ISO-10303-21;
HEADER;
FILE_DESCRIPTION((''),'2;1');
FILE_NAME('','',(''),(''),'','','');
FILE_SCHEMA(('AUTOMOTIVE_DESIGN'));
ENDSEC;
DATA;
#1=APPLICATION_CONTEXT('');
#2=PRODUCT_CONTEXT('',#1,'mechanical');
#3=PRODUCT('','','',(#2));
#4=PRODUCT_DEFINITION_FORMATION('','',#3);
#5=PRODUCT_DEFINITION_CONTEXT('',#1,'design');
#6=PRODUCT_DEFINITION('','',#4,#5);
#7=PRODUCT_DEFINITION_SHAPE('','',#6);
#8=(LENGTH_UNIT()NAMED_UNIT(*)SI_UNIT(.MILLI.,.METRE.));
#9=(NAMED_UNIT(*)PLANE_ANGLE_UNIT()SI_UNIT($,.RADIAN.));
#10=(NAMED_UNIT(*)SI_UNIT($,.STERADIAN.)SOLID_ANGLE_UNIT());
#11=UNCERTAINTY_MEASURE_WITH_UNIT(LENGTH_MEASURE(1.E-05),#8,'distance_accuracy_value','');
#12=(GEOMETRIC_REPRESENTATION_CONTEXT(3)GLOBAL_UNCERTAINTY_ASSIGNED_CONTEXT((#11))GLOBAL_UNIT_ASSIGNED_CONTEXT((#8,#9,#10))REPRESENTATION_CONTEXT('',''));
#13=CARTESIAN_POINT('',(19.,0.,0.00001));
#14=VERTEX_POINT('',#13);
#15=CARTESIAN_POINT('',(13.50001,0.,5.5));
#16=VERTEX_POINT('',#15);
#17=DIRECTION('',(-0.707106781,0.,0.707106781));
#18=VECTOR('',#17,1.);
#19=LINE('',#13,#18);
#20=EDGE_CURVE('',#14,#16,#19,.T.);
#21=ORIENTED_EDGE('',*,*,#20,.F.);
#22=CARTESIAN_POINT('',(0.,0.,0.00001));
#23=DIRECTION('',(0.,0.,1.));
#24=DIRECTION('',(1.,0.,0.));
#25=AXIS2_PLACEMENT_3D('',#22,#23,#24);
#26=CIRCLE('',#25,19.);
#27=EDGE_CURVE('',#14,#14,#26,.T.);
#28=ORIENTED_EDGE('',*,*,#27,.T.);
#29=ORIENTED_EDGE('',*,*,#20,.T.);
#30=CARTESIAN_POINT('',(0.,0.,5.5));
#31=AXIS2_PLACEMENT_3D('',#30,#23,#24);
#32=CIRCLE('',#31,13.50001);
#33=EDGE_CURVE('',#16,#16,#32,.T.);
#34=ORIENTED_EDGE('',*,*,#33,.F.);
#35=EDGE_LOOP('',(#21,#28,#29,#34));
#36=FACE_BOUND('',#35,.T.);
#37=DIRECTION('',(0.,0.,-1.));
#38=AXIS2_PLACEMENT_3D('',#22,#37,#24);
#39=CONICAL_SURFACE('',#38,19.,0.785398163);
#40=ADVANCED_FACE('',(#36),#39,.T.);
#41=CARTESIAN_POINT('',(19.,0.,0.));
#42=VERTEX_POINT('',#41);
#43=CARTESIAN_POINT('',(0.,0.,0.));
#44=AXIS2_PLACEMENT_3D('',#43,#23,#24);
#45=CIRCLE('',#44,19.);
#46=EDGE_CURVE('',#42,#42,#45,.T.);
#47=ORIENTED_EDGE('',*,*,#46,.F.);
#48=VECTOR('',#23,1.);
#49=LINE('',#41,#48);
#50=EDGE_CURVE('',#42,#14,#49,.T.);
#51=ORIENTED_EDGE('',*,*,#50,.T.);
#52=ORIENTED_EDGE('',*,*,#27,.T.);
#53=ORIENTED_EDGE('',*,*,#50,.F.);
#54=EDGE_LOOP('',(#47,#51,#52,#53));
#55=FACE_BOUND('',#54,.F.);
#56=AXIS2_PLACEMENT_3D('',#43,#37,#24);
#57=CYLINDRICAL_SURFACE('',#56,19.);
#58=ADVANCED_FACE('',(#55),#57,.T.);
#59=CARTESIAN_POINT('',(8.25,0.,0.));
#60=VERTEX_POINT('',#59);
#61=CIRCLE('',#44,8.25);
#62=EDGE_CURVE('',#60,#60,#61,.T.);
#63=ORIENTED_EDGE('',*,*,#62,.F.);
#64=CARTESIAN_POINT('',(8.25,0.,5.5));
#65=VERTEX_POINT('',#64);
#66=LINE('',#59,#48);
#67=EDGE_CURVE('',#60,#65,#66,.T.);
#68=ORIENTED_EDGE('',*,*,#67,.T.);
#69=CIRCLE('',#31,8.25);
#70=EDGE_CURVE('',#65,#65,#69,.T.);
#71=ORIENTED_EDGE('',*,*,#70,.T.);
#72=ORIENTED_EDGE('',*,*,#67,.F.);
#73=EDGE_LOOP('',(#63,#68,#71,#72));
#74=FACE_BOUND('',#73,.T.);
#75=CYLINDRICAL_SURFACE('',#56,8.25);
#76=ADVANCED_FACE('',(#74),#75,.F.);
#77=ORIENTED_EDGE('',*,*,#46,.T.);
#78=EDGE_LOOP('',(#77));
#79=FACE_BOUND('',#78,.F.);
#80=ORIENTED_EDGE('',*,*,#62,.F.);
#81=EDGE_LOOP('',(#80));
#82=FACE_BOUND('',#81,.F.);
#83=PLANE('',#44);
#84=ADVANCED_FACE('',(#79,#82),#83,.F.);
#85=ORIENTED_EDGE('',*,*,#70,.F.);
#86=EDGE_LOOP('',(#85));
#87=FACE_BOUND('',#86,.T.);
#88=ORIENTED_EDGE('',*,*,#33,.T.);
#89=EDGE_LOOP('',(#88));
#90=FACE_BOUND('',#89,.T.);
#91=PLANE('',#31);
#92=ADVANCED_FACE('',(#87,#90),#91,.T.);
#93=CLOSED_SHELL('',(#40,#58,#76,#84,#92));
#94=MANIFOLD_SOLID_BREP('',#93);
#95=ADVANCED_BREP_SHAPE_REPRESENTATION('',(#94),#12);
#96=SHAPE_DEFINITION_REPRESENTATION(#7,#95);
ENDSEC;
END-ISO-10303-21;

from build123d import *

# Parameters (mm, degrees)
F0_R     = 19
F0_R_2   = 8.25
F1_DEPTH = 5.5
F2_SIZE  = 5.49999


# Not quite as in the source:
# - a fillet or chamfer is up to 0.001 mm smaller than in the source, because OpenCascade refuses the exact size


with BuildPart() as f1:
    # F0 (on Top) → F1 (new body)
    with BuildSketch(Plane.XY):
        Circle(F0_R)
        Circle(F0_R_2, mode=Mode.SUBTRACT)
    extrude(amount=F1_DEPTH)

    # F2 (size 5.5 in the source; OpenCascade refuses exactly that, so slightly less here)
    f2_edges = [f1.edges().sort_by_distance(p)[0] for p in [
        (-19, 0, 5.5),
    ]]
    chamfer(f2_edges, length=F2_SIZE)


solid = f1.part
